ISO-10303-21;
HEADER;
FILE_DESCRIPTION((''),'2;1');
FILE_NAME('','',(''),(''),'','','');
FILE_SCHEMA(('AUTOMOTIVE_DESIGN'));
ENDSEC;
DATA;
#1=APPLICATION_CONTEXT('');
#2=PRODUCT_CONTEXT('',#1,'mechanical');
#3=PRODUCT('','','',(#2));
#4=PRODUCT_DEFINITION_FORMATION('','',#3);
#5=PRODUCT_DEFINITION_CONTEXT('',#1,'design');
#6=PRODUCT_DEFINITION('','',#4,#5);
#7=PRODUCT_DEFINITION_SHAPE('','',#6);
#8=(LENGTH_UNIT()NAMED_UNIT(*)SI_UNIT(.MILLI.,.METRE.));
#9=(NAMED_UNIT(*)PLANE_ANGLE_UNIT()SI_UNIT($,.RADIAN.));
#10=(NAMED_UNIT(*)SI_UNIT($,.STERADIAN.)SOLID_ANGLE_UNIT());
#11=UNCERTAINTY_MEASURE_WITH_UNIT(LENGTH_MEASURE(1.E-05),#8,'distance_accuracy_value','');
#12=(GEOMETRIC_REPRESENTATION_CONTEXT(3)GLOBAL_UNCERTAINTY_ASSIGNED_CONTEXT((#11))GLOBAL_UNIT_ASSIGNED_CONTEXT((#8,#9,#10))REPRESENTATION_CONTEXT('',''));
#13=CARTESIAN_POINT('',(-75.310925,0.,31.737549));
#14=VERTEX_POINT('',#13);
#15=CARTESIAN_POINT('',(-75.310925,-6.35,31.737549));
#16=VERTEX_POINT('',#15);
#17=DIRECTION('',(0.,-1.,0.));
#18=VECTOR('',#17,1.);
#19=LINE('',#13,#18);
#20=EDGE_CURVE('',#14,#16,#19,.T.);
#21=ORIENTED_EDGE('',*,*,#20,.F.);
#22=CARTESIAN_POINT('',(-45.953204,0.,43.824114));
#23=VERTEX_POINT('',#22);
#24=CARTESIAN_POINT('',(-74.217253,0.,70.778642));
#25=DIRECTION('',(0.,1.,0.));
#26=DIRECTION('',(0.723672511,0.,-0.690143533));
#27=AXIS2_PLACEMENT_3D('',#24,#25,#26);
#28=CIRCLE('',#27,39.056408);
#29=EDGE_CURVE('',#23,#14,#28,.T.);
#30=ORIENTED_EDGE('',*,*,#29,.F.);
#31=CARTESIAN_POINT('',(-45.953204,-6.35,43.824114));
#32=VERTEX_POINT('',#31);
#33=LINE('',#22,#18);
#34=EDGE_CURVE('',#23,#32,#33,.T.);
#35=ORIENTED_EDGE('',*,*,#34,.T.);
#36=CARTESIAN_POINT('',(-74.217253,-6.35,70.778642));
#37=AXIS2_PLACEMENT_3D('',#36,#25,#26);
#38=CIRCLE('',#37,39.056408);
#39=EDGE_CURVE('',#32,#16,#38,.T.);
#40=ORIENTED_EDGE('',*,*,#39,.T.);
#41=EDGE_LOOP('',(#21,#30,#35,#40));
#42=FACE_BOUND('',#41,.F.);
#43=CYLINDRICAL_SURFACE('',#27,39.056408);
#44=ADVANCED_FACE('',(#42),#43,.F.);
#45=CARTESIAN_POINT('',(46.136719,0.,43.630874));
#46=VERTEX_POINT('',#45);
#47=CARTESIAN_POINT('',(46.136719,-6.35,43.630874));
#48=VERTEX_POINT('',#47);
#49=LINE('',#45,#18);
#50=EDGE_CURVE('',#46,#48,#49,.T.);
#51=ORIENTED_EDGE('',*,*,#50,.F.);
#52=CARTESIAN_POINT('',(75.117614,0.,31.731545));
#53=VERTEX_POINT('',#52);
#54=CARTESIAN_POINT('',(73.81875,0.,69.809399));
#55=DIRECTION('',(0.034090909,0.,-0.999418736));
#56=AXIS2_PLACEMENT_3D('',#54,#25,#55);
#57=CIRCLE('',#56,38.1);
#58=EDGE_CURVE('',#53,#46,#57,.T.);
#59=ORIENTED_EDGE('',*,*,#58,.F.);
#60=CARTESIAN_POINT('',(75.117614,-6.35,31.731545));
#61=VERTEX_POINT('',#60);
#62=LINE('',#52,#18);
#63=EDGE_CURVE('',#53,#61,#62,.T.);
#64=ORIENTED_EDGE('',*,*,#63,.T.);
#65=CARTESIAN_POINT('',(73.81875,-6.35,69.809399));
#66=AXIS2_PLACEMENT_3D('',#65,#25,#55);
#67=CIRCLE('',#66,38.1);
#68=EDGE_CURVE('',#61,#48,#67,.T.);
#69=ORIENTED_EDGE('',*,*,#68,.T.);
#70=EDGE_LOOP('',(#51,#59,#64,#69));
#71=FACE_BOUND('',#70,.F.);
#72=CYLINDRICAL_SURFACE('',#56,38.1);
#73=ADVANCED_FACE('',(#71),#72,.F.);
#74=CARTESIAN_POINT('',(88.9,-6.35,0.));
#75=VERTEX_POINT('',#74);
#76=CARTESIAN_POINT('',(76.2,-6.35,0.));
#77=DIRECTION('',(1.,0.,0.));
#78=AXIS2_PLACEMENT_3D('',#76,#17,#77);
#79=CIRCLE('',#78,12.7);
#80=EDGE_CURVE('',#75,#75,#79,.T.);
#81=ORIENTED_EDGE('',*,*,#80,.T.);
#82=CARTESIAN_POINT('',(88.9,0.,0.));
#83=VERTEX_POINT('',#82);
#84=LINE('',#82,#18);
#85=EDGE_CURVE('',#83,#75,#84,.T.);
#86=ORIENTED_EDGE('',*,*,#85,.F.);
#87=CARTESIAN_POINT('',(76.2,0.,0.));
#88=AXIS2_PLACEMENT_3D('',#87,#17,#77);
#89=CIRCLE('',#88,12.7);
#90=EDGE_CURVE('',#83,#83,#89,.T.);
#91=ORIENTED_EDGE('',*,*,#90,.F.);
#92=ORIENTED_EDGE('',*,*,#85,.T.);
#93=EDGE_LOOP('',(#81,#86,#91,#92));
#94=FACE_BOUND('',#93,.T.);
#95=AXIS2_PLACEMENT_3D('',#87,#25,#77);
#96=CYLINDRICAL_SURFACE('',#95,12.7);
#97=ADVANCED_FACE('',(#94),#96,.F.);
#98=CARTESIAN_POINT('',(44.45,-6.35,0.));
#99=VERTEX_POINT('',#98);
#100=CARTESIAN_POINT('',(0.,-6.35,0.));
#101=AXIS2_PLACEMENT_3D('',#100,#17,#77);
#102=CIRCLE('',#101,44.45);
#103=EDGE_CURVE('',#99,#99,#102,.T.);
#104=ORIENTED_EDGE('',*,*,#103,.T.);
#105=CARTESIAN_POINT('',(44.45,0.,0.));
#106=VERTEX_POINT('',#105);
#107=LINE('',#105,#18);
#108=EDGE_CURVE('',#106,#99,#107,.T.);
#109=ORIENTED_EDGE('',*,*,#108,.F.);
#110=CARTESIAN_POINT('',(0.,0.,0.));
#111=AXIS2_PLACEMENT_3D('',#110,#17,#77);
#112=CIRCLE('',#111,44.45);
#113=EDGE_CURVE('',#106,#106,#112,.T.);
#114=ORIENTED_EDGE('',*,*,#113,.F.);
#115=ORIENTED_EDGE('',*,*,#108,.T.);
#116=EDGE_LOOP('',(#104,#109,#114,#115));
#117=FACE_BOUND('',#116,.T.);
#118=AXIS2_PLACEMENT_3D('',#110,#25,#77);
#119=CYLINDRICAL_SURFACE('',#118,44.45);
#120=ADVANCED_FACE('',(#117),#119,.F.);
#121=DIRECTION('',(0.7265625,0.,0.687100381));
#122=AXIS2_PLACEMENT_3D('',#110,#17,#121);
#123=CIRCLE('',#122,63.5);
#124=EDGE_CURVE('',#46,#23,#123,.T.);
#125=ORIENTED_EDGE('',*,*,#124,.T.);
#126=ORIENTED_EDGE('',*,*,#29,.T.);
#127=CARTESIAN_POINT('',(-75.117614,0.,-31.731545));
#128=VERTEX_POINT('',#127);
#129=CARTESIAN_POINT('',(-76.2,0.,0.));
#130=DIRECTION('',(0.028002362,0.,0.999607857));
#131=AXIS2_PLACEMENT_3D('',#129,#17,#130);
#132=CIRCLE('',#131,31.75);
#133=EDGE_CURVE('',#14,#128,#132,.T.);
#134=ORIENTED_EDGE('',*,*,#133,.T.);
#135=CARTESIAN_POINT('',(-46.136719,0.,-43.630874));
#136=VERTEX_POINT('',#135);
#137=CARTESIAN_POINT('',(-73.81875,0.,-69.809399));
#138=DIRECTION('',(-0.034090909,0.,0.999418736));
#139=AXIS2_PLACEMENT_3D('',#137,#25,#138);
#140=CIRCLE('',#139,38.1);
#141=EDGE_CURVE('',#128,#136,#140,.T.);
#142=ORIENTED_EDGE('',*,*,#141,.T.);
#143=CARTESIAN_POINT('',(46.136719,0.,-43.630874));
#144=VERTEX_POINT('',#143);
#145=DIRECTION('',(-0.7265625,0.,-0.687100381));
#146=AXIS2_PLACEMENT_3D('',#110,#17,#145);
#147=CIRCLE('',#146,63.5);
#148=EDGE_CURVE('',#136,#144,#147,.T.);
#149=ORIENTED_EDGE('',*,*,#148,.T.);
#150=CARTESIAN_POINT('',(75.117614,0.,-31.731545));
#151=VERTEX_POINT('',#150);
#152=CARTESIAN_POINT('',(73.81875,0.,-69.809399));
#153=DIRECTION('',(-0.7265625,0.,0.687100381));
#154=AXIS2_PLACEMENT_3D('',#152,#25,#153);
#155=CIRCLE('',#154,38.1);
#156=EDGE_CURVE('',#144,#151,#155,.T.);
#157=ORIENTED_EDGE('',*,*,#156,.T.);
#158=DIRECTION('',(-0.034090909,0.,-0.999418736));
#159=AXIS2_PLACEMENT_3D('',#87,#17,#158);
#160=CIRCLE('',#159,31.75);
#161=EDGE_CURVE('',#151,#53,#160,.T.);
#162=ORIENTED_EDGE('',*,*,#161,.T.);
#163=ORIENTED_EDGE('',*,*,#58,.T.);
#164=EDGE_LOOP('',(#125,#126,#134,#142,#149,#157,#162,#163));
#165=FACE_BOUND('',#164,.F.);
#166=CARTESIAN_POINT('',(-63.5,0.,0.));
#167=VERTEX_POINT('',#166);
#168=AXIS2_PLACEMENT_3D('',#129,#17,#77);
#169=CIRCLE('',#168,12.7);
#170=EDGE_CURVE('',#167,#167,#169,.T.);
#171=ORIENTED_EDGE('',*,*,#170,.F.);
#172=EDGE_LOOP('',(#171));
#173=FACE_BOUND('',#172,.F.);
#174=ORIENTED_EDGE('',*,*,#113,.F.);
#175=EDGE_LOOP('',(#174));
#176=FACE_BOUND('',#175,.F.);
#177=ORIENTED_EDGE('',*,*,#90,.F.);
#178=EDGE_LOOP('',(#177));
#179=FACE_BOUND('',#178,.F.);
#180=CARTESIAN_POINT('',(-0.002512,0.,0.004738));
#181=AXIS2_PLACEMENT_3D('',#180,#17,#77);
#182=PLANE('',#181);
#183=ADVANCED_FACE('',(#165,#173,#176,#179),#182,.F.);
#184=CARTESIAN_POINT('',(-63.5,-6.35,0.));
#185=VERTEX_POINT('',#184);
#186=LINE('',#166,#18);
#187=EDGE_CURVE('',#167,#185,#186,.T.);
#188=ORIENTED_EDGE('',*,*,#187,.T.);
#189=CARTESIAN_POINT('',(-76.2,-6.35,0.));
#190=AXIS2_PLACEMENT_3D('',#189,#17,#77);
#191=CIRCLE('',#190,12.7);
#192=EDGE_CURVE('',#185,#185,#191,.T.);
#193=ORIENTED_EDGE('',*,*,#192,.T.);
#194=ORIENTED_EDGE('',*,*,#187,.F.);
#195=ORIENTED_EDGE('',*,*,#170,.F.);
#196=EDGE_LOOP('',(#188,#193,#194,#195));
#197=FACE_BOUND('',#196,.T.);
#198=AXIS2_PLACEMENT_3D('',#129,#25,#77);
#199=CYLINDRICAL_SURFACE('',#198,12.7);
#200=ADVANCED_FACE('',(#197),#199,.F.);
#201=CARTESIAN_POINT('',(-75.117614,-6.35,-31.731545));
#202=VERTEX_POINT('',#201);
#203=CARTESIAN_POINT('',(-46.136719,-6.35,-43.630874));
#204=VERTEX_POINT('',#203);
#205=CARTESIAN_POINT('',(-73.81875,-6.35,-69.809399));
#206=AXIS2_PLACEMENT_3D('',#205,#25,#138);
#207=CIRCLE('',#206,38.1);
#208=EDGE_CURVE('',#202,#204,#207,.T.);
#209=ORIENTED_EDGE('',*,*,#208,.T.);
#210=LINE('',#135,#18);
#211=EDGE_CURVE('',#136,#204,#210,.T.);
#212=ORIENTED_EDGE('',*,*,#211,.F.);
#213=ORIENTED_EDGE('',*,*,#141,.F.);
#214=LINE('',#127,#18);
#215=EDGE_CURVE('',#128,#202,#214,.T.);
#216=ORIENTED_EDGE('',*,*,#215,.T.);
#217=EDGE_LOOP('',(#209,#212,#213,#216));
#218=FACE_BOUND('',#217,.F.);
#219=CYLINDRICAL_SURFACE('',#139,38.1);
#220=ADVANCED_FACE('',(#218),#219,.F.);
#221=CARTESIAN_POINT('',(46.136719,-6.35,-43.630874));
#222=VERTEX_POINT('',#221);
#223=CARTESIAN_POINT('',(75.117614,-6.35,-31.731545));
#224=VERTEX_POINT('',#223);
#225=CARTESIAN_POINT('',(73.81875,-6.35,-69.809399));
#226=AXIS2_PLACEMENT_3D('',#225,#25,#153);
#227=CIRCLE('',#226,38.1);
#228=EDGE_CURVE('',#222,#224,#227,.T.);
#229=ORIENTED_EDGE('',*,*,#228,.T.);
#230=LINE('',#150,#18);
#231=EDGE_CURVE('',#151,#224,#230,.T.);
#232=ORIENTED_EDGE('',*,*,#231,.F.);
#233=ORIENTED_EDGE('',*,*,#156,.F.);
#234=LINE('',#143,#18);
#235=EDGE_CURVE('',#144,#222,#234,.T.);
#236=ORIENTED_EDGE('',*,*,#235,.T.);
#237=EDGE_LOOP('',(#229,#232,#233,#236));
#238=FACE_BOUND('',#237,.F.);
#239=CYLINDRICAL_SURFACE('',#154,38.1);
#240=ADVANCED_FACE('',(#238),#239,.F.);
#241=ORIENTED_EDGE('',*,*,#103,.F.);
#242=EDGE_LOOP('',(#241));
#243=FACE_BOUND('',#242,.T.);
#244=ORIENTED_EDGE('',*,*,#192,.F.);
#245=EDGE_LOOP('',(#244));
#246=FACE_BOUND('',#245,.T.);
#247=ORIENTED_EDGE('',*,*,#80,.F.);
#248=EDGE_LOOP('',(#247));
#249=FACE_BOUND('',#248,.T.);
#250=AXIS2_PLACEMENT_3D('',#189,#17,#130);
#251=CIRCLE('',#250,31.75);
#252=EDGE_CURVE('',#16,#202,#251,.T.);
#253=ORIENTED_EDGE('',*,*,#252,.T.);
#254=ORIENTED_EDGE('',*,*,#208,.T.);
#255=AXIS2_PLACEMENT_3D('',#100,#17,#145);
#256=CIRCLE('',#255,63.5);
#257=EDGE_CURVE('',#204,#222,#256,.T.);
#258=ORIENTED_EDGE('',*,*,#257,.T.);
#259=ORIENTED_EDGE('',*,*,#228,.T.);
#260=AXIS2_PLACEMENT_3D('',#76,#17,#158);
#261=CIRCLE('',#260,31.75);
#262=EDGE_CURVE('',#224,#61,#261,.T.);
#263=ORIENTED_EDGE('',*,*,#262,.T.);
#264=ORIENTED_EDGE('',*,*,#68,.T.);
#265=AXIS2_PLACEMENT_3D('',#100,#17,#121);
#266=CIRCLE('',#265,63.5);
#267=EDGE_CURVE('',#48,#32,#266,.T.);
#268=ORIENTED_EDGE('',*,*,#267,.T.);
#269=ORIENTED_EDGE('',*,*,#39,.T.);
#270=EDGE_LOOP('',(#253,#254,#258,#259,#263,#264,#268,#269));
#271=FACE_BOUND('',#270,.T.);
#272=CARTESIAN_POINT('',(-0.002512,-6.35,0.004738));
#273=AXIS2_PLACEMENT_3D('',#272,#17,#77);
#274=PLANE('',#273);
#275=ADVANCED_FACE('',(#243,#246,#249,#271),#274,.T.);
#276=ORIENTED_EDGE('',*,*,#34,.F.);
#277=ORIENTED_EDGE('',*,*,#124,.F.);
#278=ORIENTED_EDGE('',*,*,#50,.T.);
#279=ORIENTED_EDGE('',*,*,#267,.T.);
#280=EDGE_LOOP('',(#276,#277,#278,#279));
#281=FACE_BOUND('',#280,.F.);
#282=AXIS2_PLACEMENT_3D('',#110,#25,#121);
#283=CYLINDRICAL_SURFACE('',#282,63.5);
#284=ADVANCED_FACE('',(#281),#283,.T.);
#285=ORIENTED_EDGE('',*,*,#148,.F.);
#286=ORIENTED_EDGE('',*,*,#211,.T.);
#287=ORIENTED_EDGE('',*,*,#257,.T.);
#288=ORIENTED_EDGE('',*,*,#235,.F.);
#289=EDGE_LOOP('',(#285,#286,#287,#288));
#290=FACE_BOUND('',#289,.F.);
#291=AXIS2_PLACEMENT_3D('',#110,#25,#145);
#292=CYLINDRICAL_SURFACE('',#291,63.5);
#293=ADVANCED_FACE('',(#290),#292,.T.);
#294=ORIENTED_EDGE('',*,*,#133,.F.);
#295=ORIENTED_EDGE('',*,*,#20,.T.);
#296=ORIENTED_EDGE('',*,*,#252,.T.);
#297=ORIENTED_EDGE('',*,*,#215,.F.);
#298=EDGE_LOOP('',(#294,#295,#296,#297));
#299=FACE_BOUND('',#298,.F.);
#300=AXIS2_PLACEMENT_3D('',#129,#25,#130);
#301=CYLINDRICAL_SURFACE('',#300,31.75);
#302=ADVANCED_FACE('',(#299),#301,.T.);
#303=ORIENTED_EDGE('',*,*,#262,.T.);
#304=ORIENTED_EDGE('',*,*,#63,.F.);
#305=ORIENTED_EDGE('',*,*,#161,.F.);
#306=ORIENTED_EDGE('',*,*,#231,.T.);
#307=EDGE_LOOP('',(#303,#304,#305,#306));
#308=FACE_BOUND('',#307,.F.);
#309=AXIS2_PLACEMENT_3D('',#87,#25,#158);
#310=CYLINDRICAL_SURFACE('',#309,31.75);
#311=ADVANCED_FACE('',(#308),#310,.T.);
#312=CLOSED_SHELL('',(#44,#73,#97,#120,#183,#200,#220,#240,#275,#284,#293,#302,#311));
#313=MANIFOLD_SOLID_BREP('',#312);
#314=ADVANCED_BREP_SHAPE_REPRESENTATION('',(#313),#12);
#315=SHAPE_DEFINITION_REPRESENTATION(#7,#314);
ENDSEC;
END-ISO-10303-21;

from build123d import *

# Parameters (mm, degrees)
F0_R     = 12.7
F0_R_2   = 44.45
F1_DEPTH = 6.35


# Not quite as in the source:
# - a length typed as a fraction of an inch, garbled in the dataset ("3 / 203.2 mm" for 3/8 in), is restored


with BuildPart() as f1:
    # F0 (on Front) → F1 (new body)
    with BuildSketch(Plane.XZ):
        with BuildLine():
            ThreePointArc((-75.1176136364, -31.7315448688), (-59.3475236203, -34.5646316236), (-46.13671875, -43.6308741946))
            ThreePointArc((-46.13671875, -43.6308741946), (0, -63.5), (46.13671875, -43.6308741946))
            ThreePointArc((46.13671875, -43.6308741946), (59.3475236203, -34.5646316236), (75.1176136364, -31.7315448688))
            ThreePointArc((75.1176136364, -31.7315448688), (107.95, 0), (75.1176136364, 31.7315448688))
            ThreePointArc((75.1176136364, 31.7315448688), (59.3475236203, 34.5646316236), (46.13671875, 43.6308741946))
            ThreePointArc((46.13671875, 43.6308741946), (0.1332471885, 63.4998601982), (-45.9532044665, 43.8241143579))
            ThreePointArc((-45.9532044665, 43.8241143579), (-59.3485408179, 34.6632102418), (-75.3109250125, 31.7375494591))
            ThreePointArc((-75.3109250125, 31.7375494591), (-107.9498527345, -0.0967023051), (-75.1176136364, -31.7315448688))
        make_face()
        with Locations((-76.2, 0)):
            Circle(F0_R, mode=Mode.SUBTRACT)
        Circle(F0_R_2, mode=Mode.SUBTRACT)
        with Locations((76.2, 0)):
            Circle(F0_R, mode=Mode.SUBTRACT)
    extrude(amount=F1_DEPTH)


solid = f1.part
